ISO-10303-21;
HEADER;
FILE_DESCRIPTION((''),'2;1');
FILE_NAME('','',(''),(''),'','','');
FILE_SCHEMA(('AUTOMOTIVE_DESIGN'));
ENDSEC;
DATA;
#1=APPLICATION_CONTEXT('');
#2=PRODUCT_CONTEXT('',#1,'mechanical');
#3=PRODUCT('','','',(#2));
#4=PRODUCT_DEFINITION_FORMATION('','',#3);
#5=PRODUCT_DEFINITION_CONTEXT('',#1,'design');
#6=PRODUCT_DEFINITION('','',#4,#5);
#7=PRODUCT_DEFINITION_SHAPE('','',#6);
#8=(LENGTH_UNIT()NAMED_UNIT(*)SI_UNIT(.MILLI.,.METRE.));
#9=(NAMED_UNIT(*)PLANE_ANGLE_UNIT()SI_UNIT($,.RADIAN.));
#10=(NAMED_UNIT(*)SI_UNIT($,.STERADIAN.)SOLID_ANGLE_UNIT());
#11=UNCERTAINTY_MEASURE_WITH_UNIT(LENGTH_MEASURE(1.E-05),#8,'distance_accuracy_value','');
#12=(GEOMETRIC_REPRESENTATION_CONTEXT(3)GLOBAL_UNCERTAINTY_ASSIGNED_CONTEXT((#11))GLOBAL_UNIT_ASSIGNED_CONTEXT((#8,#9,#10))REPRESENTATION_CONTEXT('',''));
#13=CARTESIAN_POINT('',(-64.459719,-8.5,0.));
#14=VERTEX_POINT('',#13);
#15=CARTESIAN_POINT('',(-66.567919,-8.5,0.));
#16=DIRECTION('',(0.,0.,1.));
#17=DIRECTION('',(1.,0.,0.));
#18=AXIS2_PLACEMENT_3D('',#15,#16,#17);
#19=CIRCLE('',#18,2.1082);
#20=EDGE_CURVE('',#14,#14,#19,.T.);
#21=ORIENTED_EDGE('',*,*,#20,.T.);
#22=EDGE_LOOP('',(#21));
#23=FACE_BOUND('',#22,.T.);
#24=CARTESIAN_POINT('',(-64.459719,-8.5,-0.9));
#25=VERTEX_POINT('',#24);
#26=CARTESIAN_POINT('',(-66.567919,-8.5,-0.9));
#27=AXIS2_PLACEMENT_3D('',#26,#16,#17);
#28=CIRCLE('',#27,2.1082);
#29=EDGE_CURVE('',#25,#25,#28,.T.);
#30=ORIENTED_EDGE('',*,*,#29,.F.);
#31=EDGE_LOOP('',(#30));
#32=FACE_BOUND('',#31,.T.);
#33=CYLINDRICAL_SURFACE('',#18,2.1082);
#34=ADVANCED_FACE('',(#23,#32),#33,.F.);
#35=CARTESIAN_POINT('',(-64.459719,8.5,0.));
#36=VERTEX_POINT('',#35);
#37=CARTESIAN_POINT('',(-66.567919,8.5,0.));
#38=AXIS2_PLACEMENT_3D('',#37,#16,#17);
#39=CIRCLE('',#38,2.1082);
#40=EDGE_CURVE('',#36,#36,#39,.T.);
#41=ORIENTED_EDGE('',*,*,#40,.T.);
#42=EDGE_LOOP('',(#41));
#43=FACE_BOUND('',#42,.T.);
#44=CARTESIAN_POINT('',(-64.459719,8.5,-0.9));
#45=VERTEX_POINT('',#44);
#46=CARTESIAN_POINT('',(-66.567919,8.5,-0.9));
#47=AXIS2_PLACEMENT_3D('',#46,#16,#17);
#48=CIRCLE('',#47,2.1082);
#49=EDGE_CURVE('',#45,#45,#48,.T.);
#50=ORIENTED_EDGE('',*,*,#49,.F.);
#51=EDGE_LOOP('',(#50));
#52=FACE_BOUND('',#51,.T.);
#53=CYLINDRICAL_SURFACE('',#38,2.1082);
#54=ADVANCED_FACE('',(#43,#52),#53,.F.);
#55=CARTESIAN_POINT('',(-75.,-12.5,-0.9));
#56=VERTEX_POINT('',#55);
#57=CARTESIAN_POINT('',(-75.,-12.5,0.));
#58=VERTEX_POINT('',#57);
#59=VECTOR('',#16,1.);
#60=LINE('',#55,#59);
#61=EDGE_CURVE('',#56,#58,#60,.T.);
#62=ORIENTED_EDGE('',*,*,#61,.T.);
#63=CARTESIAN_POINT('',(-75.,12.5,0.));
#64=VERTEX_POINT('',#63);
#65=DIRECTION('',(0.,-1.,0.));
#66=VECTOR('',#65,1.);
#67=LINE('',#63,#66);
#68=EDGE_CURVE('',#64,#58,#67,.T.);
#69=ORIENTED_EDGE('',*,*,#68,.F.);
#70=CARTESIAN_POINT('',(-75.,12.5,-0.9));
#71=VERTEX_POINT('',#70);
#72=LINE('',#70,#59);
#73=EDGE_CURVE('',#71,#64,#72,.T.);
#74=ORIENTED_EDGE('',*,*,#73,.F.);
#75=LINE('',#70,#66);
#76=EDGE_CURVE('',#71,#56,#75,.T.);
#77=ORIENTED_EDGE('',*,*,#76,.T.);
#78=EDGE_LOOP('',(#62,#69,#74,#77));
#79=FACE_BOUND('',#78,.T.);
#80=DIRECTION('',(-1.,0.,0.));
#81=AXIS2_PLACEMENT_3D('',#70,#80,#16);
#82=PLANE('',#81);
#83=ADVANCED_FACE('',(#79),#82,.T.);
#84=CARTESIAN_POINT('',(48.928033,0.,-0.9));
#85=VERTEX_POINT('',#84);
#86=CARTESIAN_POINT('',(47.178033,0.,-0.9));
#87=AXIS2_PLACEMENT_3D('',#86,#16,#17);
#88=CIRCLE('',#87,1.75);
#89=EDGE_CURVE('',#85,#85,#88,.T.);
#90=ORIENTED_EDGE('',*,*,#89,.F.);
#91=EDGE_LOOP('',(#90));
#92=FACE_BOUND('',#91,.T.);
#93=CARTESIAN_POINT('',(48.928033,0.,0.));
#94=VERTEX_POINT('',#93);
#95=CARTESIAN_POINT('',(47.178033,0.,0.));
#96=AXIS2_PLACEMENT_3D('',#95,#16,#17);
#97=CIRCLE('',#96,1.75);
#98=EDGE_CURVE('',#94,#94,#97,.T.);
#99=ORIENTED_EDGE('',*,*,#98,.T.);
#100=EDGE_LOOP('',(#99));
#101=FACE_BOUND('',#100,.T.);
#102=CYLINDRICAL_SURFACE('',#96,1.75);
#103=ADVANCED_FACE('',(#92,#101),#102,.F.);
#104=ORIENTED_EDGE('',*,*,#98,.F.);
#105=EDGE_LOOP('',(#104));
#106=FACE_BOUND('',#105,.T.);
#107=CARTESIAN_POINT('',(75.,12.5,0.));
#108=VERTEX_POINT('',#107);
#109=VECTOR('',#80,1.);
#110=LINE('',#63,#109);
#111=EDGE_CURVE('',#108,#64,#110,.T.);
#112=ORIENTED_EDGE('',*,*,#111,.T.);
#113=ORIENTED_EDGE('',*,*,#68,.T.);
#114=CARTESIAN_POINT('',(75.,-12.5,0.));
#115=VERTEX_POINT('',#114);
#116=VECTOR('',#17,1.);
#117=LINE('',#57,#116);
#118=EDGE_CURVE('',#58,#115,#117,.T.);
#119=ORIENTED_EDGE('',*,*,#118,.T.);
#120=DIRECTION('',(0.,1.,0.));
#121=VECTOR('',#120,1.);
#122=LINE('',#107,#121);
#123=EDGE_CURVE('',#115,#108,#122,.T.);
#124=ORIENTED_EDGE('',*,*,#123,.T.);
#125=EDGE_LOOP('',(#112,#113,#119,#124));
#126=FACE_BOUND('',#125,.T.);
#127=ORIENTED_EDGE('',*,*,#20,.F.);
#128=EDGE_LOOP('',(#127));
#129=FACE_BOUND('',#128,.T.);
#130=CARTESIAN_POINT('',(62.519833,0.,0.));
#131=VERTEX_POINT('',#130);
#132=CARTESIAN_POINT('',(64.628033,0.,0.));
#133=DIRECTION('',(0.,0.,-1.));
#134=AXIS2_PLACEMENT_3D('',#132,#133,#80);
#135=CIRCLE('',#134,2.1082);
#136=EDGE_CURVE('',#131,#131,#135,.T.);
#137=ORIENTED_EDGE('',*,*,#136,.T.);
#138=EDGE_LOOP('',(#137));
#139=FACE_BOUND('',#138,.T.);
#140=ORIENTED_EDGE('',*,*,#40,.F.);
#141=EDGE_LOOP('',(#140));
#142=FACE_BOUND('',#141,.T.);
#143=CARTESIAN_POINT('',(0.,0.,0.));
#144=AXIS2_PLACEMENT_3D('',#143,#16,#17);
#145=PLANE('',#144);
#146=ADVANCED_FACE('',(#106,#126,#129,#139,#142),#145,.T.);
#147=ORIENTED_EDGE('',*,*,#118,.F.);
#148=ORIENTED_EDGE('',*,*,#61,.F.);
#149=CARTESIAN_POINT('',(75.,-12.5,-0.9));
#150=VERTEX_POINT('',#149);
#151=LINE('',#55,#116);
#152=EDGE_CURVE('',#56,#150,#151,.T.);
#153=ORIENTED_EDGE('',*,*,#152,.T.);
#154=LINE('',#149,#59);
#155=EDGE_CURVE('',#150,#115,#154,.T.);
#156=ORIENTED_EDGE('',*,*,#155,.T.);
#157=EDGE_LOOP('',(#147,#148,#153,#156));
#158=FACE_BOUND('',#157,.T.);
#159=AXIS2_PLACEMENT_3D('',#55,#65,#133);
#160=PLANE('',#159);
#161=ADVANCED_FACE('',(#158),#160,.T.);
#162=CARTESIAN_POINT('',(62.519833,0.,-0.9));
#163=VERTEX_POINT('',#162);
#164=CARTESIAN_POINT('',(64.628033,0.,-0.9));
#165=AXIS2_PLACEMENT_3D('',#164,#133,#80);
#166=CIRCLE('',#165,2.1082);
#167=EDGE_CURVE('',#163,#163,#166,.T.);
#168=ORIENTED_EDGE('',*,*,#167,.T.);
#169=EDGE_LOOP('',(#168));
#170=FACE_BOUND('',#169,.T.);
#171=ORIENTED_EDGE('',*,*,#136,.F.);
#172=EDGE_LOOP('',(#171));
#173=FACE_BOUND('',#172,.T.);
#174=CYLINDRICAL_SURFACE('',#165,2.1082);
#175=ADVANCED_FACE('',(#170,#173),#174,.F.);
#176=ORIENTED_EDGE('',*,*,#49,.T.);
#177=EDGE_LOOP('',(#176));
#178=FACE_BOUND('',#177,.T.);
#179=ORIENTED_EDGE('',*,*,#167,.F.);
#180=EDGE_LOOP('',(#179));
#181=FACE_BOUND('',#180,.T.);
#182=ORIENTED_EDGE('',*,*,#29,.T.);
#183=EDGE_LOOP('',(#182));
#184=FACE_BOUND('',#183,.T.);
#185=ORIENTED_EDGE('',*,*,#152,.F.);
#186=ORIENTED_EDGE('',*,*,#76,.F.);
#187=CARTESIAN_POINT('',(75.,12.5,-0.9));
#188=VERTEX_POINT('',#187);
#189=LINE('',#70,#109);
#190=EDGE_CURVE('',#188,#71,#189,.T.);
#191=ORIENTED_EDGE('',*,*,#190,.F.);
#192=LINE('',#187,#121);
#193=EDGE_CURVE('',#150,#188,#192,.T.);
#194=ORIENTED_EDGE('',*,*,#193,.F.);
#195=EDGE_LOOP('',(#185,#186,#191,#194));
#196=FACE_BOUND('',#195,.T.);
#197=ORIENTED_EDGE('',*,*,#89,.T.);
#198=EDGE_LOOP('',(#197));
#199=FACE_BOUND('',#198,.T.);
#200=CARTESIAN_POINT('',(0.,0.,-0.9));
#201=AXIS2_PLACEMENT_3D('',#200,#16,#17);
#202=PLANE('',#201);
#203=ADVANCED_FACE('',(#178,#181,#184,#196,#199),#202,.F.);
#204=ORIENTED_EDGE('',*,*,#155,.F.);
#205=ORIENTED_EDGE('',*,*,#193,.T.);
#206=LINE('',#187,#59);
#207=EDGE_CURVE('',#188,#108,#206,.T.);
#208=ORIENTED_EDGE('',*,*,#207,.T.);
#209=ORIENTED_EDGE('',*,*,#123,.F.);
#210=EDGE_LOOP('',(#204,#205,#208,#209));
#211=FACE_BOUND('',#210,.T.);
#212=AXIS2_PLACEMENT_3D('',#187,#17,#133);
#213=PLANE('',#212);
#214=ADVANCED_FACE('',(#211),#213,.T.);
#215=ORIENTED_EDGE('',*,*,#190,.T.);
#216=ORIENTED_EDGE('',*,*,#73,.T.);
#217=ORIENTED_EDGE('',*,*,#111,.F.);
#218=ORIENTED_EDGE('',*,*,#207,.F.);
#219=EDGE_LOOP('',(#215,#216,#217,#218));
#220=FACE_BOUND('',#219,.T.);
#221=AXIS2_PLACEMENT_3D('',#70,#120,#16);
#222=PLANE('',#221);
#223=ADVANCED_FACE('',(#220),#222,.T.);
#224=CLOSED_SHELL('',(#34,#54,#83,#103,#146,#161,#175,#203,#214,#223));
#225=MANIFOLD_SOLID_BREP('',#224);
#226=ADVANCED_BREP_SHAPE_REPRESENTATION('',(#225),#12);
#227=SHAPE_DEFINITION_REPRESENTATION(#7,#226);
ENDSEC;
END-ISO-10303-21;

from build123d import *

# Parameters (mm, degrees)
SKETCH2_W                   = 150
SKETCH2_H                   = 25
BASE_FLANGE1_DEPTH          = 0.9
F_19_0_166_DIAMETER_SLOT1_D = 4.2164
F_19_0_166_DIAMETER_SLOT2_D = 4.2164
F_1_0MM_DOWEL_SLOT1_D       = 3.5


# Sheet-metal steps are written as plain solids
with BuildPart() as part:
    # Sketch2 → Base-Flange1 (new body)
    with BuildSketch(Plane.XY):
        Rectangle(SKETCH2_W, SKETCH2_H)
    extrude(amount=-BASE_FLANGE1_DEPTH)

    # #19 (0.166) Diameter Slot1 (through all)
    with Locations(Plane(origin=(0, 0, -0.9), x_dir=(-1, 0, 0), z_dir=(0, 0, -1))):
        with Locations((-64.628032866, 0)):
            Hole(F_19_0_166_DIAMETER_SLOT1_D / 2)

    # #19 (0.166) Diameter Slot2 (through all)
    with Locations(Plane.XY):
        with Locations((-66.567919304, 8.5), (-66.567919304, -8.5)):
            Hole(F_19_0_166_DIAMETER_SLOT2_D / 2)

    # Ø1.0mm Dowel Slot1 (through all)
    with Locations(Plane.XY):
        with Locations((47.178032866, 0)):
            Hole(F_1_0MM_DOWEL_SLOT1_D / 2)


solid = part.part
